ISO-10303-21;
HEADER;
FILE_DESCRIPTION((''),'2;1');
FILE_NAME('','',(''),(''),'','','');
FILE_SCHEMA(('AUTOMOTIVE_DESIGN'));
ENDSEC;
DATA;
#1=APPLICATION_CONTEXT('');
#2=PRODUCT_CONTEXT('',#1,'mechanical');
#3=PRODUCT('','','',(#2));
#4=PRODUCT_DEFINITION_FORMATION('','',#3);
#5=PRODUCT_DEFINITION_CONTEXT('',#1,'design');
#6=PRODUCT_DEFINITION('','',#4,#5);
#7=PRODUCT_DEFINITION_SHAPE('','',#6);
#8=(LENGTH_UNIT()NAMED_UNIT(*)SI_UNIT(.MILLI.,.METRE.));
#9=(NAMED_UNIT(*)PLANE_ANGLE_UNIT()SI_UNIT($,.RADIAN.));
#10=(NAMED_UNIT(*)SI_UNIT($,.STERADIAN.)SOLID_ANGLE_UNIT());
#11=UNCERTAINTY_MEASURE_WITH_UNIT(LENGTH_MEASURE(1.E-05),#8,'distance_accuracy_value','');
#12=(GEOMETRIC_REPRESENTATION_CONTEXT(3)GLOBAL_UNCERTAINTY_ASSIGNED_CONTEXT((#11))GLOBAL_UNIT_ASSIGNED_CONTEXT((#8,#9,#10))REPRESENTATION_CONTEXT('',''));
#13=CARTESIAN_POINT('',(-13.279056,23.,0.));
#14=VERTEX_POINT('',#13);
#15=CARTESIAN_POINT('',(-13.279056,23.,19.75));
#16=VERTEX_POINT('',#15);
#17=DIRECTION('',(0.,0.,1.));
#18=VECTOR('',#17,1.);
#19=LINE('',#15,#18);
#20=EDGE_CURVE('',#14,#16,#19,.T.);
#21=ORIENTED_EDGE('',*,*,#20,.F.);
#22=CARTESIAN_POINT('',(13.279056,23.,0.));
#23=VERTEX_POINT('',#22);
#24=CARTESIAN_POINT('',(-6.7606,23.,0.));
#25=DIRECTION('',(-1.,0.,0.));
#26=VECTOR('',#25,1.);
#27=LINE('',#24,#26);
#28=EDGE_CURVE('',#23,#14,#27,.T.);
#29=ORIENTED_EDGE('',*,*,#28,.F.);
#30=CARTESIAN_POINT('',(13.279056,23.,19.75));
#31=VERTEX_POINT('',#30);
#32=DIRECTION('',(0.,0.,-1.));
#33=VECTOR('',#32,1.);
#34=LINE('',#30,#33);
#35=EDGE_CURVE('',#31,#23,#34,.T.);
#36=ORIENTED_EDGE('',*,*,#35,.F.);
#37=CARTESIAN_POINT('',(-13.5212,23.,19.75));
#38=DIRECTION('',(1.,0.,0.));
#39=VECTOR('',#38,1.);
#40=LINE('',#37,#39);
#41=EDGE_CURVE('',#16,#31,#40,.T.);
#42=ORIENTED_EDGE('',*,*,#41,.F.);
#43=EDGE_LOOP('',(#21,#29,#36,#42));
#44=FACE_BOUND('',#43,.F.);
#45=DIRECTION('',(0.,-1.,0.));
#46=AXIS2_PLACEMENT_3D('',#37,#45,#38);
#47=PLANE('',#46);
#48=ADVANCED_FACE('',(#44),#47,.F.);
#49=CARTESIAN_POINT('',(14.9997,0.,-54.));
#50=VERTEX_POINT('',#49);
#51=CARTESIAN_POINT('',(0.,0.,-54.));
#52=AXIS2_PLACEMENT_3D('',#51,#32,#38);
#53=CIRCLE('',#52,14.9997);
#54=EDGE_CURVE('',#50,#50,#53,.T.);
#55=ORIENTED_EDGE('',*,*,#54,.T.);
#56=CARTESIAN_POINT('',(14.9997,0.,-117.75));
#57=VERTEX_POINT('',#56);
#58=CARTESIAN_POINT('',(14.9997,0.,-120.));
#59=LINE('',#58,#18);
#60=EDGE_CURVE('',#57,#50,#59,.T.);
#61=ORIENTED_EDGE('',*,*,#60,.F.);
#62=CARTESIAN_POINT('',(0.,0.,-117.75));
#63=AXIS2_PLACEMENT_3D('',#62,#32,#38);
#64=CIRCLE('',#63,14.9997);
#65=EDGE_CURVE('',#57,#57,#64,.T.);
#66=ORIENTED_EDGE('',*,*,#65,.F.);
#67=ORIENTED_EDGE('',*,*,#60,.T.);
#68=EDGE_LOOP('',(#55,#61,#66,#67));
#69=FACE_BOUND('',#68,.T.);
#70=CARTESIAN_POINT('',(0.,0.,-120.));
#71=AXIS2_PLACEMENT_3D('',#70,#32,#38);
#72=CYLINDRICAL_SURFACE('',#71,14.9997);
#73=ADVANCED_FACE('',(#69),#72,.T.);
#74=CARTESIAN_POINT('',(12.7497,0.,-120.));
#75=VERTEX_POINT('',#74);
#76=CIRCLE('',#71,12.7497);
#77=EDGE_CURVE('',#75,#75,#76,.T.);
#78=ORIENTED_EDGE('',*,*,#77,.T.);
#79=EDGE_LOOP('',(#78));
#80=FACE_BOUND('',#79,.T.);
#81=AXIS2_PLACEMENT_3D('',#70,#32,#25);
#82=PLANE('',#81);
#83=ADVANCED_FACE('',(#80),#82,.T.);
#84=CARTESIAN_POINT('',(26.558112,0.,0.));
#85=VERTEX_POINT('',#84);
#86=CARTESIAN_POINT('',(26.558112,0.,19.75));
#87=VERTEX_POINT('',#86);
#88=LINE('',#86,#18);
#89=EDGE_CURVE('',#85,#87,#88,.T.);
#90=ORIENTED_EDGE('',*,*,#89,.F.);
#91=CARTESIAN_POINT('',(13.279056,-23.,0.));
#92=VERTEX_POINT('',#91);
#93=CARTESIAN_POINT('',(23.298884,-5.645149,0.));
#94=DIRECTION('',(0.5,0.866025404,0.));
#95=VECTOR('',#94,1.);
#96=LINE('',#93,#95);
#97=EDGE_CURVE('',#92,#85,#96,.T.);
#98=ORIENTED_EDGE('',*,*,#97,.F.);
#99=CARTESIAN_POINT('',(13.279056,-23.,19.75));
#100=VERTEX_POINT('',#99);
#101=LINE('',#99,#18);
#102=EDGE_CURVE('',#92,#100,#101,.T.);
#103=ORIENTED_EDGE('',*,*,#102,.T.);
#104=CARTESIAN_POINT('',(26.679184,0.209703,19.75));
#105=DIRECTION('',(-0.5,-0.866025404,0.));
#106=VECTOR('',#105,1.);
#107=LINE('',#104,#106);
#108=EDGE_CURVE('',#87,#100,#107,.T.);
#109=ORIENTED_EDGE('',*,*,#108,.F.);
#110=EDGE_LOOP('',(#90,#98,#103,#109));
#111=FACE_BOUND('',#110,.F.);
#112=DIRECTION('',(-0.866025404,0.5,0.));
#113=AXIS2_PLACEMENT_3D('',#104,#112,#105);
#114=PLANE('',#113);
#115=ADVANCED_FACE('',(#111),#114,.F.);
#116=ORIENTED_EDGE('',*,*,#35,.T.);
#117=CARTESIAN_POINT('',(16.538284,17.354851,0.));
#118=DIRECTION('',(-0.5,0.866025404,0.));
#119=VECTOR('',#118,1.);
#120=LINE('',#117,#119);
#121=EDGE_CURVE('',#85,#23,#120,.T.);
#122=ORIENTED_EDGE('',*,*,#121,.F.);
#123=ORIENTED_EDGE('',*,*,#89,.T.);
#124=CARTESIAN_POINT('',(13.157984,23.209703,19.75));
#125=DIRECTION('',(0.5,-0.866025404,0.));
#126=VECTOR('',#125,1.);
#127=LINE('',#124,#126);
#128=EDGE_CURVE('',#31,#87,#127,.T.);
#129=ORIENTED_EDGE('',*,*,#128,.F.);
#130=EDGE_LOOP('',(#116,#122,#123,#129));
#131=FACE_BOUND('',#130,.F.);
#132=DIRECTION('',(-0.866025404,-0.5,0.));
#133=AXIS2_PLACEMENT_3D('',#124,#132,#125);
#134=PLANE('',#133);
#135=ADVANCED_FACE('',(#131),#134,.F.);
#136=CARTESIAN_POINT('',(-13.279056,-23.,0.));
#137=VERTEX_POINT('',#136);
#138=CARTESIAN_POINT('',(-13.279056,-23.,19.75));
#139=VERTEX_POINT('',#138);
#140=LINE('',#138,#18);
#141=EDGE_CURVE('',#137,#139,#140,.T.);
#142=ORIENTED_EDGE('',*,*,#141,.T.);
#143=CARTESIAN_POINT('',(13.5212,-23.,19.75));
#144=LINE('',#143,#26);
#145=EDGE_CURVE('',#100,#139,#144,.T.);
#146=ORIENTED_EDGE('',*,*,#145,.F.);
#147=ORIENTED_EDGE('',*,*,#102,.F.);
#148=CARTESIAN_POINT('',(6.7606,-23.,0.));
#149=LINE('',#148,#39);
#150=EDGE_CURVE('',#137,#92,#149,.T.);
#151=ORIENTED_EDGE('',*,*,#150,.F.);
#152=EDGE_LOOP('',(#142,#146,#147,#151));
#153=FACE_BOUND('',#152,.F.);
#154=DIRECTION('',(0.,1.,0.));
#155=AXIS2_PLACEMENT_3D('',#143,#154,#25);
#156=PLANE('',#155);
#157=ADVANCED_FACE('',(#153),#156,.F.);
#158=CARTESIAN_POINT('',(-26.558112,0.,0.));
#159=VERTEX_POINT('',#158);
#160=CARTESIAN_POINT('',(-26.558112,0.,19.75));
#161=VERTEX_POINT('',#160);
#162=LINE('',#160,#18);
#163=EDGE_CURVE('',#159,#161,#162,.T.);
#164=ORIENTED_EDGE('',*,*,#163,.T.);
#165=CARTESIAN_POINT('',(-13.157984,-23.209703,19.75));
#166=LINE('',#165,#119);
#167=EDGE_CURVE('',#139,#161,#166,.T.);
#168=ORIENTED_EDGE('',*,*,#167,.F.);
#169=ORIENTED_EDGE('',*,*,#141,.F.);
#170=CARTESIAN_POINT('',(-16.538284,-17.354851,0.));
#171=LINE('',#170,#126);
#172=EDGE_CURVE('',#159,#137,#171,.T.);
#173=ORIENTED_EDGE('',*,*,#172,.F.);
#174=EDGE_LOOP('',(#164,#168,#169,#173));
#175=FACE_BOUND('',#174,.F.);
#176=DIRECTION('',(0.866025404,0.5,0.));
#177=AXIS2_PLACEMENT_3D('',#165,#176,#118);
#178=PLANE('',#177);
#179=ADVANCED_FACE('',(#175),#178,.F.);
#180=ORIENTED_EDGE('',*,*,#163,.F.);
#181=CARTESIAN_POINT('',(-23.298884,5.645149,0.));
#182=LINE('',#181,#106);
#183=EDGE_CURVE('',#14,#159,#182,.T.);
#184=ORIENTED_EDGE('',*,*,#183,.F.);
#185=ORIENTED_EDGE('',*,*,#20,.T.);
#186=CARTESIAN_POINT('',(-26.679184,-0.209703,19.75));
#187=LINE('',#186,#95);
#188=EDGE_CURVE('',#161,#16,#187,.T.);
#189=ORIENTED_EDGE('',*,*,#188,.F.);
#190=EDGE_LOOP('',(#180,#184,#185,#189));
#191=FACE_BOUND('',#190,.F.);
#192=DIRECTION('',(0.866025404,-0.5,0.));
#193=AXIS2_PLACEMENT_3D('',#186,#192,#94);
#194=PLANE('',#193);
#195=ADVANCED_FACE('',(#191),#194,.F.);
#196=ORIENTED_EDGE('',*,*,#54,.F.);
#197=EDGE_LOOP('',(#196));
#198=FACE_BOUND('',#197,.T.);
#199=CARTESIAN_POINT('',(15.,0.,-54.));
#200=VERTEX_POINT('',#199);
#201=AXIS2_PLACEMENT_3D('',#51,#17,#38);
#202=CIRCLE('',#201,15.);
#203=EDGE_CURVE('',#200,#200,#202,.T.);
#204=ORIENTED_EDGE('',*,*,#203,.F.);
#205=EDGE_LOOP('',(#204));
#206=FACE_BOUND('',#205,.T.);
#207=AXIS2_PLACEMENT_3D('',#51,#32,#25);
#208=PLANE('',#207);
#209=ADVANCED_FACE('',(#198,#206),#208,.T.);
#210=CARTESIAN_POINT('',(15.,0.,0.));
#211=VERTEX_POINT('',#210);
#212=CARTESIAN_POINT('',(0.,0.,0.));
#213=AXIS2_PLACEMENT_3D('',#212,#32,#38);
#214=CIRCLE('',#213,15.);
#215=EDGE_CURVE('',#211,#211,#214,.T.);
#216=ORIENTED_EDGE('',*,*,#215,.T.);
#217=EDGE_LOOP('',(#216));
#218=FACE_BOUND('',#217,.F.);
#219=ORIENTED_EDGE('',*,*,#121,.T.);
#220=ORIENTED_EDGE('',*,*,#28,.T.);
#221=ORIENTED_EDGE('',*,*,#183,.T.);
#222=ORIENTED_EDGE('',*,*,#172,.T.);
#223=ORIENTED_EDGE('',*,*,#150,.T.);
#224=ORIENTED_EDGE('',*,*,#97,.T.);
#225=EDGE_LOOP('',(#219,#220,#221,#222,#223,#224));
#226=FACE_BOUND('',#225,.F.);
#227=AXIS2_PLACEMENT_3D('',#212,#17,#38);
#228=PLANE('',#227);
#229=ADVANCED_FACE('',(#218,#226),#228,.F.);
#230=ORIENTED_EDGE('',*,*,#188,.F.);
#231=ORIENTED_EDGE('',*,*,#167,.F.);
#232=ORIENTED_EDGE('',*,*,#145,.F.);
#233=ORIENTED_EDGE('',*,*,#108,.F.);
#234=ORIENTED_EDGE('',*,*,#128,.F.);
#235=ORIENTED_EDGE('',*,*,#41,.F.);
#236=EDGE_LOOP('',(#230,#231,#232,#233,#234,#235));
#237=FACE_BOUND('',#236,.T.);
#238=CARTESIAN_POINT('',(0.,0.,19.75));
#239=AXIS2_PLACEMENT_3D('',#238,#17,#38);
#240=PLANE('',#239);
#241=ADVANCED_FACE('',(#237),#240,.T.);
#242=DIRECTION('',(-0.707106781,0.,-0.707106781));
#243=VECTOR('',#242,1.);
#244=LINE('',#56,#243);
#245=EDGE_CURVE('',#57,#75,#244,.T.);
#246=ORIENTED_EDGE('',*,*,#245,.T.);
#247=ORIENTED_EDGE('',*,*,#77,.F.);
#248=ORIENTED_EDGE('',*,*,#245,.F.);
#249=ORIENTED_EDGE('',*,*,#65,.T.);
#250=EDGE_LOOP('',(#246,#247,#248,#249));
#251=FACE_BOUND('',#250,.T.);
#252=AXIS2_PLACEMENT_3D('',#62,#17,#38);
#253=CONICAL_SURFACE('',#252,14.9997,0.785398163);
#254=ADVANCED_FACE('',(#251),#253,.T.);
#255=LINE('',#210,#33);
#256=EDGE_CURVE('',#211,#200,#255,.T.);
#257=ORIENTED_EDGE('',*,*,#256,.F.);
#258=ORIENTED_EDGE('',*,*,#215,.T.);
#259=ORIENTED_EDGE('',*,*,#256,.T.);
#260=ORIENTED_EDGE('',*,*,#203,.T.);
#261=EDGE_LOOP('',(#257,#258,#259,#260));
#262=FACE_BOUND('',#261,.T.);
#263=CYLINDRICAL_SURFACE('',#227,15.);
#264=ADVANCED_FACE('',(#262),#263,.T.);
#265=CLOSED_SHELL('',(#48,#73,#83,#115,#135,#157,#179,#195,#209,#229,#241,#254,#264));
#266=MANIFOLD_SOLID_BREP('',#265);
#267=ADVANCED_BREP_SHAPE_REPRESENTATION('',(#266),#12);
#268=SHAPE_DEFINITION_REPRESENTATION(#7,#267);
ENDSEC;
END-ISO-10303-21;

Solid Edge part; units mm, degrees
sketch "Sketch1" plane through (0, 0, 0) normal (0, 0, 1) x (1, 0, 0)
  circle A0 centre (0, 0) radius 26.68
  dimension "D1" = 53.36
extrude "Protrusion1" add sketch "Sketch1" along normal blind 19.75
sketch "Sketch2" plane through (0, 0, 0) normal (0, 0, -1) x (1, 0, 0)
  circle A0 centre (0, 0) radius 15
extrude "Protrusion2" add sketch "Sketch2" along normal blind 120
sketch "Sketch3" plane through (0, 0, -120) normal (0, 0, -1) x (1, 0, 0)
  circle A0 centre (0, 0) radius 14.9997
extrude "Cutout1" cut sketch "Sketch3" against normal blind 66 flip side to cut
chamfer "Chamfer_1" distance 2.25 angle 45 1 edges at (-14.9997, 0, -120)
sketch "Sketch4" plane through (0, 0, 19.75) normal (0, 0, 1) x (1, 0, 0)
  line L0 (-13.5212, 23) -> (13.5212, 23)
  dimension "D1" = 46
extrude "Cutout2" cut sketch "Sketch4" against normal up to next material side at (0, 23.05, 19.75)
pattern_circular "Pattern1" count 6 over 360 about axis through (0, 0, 19.75) along (0, 0, 1) of "Cutout2"
properties part number "201066"
